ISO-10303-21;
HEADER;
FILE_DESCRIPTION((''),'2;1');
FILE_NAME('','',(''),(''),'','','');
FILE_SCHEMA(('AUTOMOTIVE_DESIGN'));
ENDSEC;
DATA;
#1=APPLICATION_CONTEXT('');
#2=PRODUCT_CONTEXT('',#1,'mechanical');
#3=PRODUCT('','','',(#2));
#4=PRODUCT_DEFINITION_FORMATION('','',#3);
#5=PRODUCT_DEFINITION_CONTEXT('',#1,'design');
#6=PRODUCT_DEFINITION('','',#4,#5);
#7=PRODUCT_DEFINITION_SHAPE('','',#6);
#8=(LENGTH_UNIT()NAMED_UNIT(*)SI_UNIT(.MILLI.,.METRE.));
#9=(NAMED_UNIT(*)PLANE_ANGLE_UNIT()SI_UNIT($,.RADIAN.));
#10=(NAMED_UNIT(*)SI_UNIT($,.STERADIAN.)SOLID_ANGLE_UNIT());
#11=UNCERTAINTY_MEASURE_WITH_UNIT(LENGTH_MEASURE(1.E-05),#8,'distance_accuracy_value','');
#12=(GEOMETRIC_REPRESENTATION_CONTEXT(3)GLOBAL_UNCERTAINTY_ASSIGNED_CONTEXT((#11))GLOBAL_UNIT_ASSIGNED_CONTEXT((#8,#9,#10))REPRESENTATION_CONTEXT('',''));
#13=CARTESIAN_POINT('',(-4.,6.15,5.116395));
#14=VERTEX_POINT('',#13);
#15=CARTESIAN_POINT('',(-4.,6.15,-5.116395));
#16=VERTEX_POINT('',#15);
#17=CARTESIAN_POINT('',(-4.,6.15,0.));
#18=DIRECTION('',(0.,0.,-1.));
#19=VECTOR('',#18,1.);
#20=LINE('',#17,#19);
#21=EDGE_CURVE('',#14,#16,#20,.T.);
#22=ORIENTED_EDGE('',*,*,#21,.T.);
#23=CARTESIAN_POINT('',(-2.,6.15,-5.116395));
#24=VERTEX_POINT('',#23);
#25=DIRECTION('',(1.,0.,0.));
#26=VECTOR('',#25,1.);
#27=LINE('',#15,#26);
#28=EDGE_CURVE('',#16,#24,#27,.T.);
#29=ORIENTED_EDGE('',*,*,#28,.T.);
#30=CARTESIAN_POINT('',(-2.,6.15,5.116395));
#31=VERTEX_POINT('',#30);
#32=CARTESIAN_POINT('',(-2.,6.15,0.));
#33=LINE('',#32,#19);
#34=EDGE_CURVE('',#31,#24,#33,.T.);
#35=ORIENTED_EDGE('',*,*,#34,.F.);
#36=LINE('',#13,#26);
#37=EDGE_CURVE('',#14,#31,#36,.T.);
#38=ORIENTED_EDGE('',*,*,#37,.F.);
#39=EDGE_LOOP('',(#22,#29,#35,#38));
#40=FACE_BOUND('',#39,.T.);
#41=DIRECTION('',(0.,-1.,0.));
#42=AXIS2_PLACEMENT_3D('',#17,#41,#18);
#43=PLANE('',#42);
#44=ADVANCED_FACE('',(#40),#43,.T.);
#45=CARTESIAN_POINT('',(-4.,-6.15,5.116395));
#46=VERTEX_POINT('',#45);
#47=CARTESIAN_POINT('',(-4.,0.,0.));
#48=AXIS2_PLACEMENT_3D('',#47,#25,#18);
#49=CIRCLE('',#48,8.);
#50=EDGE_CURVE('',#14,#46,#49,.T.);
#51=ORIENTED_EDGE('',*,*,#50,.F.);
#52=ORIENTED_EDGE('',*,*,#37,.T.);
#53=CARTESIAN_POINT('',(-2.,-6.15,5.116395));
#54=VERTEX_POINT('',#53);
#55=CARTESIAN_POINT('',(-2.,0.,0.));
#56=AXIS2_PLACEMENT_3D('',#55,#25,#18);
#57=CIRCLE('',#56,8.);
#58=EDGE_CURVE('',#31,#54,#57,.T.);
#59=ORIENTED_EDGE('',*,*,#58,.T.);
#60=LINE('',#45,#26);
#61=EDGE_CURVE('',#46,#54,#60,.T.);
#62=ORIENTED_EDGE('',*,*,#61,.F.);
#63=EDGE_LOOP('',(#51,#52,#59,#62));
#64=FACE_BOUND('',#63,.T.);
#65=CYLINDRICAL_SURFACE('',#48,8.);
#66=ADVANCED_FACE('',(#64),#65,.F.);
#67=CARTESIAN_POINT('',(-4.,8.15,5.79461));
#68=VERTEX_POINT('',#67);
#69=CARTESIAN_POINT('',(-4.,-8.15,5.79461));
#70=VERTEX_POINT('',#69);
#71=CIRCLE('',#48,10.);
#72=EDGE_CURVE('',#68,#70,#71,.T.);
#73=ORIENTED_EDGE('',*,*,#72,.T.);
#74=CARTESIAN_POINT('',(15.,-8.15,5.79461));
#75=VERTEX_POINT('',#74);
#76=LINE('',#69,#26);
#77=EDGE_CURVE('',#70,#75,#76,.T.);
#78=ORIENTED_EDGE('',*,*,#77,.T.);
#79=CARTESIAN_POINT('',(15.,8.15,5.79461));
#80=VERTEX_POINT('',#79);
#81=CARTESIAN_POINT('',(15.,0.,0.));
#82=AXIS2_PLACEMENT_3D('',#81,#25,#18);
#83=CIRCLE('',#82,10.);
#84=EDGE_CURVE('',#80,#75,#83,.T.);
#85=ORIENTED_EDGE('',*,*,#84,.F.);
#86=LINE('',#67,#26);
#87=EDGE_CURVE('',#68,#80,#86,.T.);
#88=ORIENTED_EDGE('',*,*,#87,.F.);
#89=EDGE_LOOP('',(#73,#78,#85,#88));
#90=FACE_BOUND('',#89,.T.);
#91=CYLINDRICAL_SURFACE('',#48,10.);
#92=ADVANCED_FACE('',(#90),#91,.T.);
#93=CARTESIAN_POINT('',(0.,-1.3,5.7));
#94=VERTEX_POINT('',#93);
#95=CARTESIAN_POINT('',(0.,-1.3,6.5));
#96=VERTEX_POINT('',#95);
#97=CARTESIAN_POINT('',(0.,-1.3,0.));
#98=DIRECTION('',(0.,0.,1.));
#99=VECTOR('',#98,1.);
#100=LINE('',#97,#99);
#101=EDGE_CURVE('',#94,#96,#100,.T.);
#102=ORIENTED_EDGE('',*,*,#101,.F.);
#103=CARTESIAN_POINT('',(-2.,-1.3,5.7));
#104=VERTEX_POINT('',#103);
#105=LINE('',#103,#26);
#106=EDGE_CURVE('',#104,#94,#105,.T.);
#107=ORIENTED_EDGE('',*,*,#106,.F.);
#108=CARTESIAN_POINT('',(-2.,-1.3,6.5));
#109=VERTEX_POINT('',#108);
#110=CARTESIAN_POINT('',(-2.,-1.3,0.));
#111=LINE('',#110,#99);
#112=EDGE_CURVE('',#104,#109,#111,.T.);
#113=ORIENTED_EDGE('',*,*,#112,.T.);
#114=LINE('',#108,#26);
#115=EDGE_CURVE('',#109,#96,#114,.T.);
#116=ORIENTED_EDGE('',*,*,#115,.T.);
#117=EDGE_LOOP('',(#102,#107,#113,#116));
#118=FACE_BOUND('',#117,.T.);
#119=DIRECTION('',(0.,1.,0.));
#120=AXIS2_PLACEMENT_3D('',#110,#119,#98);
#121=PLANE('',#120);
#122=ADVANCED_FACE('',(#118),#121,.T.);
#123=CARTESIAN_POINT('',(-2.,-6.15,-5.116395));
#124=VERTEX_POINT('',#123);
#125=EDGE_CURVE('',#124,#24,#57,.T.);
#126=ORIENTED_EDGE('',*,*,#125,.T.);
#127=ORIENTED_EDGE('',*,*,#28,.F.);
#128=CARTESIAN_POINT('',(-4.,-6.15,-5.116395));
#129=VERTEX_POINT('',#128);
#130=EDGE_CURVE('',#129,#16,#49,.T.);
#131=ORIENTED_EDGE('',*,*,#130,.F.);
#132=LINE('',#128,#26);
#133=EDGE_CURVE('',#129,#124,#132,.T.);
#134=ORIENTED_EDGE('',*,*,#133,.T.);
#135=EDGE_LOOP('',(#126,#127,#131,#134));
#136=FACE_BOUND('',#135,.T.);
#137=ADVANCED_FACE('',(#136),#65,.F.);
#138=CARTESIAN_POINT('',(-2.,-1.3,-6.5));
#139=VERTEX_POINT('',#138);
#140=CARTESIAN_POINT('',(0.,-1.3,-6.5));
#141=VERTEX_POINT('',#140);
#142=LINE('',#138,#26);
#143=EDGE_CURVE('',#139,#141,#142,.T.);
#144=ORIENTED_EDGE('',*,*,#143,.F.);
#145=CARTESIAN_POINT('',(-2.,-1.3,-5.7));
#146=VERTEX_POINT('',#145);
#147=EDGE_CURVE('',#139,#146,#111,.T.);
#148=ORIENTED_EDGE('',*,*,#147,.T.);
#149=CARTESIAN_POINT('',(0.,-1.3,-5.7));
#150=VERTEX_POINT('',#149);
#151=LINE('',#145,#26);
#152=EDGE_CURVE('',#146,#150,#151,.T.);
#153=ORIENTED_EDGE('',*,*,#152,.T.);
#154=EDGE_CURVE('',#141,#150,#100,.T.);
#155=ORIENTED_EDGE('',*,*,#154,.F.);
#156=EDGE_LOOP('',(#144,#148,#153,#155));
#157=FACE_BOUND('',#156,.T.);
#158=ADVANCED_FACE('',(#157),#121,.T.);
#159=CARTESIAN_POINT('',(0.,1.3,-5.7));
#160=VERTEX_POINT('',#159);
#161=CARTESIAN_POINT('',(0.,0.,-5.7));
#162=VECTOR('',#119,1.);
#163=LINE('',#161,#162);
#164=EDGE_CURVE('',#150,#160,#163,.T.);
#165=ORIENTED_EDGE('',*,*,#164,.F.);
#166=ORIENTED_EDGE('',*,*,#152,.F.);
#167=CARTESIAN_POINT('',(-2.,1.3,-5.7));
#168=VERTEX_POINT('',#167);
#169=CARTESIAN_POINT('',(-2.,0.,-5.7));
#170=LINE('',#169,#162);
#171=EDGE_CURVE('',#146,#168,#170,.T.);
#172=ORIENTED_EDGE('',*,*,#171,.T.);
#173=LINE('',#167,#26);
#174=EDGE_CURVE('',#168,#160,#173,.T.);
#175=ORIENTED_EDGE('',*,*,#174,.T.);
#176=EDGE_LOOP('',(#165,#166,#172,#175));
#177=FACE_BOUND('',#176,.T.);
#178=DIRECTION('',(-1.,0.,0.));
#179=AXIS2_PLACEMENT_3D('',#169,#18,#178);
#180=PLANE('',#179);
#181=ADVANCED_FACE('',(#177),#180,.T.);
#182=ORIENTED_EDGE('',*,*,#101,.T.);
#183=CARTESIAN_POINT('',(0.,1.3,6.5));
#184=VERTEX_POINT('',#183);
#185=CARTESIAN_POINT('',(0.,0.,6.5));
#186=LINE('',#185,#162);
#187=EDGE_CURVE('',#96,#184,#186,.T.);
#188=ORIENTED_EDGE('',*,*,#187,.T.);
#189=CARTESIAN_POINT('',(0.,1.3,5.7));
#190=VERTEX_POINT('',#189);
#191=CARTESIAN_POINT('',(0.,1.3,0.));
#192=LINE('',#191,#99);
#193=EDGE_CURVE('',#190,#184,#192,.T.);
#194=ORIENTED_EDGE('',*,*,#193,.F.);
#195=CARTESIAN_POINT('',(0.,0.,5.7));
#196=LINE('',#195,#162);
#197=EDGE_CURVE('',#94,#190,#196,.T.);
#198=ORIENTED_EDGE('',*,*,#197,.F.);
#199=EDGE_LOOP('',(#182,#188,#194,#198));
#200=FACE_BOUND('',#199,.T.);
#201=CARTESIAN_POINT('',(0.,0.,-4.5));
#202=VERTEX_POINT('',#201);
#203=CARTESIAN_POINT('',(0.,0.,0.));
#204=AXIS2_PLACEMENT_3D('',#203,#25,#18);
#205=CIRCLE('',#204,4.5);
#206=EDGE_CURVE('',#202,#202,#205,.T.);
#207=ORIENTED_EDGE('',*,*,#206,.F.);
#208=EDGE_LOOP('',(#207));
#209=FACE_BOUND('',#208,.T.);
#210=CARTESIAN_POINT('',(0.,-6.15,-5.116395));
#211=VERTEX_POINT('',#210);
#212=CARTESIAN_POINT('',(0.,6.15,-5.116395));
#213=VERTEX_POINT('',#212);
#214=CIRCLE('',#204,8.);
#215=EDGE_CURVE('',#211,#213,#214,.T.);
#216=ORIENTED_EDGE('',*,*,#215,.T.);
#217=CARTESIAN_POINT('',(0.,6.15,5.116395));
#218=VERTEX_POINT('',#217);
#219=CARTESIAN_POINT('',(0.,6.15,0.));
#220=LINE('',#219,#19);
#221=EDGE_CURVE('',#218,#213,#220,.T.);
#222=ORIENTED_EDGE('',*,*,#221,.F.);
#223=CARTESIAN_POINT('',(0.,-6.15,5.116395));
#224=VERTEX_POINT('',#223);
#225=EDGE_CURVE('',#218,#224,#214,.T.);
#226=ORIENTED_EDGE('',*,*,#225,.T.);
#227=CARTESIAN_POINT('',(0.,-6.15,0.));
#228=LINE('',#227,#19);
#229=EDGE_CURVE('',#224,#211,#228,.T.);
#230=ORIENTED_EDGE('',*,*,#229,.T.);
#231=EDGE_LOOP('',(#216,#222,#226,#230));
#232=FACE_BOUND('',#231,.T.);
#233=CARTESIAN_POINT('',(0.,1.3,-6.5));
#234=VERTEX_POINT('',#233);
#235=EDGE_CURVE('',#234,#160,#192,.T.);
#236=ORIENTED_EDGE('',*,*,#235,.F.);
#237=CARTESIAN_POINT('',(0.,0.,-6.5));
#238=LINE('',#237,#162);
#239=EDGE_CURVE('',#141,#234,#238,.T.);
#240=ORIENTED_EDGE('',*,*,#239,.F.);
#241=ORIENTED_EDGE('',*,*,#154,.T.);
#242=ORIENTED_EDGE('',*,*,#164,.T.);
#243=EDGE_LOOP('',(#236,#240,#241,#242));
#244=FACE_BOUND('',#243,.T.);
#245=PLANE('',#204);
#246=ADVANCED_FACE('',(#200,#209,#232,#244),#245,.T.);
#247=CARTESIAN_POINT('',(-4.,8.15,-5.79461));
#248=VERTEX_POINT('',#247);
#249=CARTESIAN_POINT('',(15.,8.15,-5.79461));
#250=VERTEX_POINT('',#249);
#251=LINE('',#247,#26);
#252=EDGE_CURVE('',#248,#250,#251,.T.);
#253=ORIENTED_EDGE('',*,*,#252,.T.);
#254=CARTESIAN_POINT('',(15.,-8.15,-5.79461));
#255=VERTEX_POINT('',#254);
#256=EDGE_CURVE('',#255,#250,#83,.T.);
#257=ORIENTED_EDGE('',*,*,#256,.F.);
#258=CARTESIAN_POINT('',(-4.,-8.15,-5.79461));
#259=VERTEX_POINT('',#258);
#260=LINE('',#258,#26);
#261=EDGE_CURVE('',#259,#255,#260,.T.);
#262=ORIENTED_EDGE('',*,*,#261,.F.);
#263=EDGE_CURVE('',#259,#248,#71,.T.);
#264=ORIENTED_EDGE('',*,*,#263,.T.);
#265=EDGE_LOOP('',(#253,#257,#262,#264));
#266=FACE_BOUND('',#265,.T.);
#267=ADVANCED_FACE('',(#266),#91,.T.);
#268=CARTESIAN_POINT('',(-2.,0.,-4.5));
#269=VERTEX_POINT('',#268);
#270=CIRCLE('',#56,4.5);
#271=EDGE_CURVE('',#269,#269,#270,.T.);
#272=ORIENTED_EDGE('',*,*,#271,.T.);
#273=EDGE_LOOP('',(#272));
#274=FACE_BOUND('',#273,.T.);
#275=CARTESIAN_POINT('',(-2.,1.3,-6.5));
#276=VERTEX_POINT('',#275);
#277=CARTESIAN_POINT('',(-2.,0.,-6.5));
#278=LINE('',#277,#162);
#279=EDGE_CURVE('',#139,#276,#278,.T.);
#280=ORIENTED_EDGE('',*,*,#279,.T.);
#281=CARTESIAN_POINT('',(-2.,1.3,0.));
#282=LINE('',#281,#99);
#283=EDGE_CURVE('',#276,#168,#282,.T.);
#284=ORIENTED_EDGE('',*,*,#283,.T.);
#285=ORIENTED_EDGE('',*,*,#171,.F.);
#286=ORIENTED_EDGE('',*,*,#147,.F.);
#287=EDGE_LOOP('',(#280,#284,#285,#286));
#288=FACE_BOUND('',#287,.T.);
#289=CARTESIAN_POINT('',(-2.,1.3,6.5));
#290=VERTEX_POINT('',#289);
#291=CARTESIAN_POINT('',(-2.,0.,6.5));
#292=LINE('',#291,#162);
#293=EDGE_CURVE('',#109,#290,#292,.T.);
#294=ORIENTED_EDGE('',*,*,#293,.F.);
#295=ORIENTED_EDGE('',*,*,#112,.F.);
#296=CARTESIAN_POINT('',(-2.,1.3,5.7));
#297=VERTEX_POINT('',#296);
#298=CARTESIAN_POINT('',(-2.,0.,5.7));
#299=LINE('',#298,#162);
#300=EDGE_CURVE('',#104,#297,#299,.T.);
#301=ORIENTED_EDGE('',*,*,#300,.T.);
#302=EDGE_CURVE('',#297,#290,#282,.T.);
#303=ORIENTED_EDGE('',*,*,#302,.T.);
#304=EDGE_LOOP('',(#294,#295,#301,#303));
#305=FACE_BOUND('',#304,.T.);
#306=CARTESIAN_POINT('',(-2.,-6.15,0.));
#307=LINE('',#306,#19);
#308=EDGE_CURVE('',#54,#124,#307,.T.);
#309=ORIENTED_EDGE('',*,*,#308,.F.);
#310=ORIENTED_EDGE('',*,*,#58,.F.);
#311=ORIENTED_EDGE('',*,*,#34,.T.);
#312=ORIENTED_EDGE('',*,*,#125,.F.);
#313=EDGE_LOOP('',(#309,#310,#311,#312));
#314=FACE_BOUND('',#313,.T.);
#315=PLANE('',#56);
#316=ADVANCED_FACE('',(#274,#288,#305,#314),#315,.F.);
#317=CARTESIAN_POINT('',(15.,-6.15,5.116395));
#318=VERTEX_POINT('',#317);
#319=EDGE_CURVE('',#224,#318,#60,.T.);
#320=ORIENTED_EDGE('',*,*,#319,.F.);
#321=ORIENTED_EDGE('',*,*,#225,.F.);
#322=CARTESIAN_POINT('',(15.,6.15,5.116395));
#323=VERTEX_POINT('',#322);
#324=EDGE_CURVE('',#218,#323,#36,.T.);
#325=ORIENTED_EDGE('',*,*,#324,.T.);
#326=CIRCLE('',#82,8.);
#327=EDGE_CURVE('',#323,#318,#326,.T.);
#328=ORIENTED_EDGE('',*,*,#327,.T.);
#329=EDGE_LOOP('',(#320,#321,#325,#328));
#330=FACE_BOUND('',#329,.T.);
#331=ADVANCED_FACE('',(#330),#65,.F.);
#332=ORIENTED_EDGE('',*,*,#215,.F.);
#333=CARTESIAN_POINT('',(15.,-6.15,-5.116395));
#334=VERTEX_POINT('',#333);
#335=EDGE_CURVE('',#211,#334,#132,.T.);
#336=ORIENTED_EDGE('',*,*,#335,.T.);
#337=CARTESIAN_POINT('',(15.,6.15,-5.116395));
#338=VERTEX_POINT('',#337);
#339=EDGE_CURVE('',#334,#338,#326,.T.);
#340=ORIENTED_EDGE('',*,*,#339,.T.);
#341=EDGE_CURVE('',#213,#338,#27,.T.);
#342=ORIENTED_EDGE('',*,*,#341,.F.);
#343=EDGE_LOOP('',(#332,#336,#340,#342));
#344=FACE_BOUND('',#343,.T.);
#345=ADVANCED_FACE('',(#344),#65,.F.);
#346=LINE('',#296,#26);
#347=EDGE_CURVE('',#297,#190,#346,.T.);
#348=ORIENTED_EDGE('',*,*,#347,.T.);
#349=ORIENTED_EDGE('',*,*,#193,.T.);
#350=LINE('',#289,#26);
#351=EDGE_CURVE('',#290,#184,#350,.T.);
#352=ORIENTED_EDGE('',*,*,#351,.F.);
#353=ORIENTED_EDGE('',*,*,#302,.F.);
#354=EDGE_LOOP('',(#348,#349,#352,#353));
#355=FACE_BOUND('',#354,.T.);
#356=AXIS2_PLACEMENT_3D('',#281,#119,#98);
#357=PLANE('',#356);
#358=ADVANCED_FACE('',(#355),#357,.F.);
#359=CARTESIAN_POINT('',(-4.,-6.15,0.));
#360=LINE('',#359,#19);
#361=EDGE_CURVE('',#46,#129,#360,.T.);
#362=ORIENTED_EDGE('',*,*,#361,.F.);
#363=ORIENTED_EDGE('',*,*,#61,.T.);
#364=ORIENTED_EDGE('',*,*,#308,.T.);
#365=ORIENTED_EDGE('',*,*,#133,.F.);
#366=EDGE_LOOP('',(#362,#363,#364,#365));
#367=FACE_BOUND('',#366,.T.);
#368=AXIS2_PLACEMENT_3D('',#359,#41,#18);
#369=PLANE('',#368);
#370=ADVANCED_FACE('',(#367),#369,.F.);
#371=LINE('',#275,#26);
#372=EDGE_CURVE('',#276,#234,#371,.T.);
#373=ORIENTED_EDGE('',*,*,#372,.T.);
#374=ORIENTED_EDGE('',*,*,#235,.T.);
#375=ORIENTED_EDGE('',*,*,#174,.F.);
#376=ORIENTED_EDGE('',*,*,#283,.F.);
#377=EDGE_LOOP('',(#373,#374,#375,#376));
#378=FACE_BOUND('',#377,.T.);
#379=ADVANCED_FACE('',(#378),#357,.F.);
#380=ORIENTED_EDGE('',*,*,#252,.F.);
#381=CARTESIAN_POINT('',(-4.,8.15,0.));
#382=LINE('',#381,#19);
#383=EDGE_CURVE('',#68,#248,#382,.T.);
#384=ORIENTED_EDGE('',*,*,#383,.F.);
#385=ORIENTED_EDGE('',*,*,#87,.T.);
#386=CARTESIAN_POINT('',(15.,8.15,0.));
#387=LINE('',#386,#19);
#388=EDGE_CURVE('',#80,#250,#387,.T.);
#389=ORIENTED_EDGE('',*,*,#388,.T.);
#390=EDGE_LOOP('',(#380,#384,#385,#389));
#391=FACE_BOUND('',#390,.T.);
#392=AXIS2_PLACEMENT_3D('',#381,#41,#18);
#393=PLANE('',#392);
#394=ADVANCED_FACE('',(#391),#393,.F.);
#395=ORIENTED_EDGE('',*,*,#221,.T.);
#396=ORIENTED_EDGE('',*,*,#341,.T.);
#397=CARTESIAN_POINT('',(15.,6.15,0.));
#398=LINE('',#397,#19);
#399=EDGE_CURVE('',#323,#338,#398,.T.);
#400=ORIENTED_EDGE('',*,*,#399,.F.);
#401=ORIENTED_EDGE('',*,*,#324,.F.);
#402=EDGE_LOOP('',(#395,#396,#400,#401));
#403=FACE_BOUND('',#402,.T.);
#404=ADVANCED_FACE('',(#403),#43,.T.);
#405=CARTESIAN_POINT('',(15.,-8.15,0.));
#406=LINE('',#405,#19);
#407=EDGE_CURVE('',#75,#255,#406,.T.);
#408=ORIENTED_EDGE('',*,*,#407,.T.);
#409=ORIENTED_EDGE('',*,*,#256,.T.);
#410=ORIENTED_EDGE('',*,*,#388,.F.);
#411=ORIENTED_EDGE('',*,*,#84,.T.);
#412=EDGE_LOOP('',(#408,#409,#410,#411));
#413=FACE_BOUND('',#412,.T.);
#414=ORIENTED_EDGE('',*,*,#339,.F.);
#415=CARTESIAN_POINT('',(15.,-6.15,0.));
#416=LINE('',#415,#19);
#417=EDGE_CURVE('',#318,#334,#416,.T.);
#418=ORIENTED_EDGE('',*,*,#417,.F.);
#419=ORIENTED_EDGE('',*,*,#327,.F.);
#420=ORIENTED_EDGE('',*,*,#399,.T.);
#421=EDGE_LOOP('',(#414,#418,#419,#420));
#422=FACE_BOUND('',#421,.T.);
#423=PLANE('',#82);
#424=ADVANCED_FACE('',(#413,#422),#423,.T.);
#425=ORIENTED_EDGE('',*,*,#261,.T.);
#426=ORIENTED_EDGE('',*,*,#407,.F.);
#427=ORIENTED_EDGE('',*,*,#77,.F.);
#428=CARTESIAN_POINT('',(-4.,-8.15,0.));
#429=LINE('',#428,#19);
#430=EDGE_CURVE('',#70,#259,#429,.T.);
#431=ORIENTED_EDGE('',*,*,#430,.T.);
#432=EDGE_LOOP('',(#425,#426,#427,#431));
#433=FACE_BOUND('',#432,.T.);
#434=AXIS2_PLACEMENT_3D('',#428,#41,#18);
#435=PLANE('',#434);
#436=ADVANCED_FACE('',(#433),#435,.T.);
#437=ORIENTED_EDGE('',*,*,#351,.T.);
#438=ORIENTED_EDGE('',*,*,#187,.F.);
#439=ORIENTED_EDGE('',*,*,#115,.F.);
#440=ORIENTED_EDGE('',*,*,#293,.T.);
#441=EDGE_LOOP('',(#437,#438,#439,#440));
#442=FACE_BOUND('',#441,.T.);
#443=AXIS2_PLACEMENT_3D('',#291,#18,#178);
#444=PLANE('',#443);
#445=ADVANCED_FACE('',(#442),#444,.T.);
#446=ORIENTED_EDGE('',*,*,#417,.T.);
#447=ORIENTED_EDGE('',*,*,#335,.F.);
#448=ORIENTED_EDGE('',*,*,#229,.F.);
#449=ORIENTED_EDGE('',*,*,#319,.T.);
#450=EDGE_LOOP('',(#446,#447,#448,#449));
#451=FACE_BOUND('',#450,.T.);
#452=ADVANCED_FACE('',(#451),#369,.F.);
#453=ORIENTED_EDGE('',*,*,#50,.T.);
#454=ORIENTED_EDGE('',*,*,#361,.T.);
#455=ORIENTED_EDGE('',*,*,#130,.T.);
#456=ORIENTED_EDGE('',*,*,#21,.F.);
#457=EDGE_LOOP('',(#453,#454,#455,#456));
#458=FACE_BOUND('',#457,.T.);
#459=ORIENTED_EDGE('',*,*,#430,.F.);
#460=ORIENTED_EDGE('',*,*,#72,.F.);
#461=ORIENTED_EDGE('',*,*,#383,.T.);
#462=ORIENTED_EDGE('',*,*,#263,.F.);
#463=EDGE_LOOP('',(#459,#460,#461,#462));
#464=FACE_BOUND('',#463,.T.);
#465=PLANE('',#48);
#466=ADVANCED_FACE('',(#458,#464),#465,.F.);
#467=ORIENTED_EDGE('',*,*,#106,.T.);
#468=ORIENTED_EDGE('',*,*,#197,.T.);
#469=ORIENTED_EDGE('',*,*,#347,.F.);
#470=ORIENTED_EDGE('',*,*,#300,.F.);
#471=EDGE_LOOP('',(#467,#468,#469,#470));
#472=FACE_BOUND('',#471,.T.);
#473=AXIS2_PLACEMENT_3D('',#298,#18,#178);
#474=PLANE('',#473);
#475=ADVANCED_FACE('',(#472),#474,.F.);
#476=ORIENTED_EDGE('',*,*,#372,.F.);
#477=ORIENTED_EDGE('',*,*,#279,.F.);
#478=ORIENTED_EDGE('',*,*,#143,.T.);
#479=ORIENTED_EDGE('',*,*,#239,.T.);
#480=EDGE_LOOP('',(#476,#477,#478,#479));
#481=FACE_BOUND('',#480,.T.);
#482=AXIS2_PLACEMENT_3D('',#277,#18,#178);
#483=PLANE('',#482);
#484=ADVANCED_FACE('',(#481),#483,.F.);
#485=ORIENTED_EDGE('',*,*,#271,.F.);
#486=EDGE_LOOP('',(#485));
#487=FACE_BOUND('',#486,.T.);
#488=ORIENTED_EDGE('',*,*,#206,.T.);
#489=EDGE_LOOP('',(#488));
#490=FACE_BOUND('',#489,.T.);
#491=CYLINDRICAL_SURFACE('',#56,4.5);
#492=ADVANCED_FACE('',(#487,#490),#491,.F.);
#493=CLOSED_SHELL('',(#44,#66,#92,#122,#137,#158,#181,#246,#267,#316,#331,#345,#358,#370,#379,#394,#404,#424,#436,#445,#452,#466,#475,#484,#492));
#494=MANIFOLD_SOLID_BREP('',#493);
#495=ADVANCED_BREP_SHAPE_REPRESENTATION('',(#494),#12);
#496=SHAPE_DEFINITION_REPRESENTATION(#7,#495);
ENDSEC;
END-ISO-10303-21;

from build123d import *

# Parameters (mm, degrees)
SKETCH_1_W        = 0.8
SKETCH_1_H        = 2.6
SKETCH_1_R        = 4.5
EXTRUDE_1_DEPTH   = 2
EXTRUDE_START     = -4
EXTRUDE_1_2_DEPTH = 19


# Read off the part's stored shape, not the designer's step: 拉伸-薄壁1
with BuildPart() as part:
    # 草图1 → Extrude 1 (new body)
    with BuildSketch(Plane(origin=(0, 0, 0), x_dir=(0, 0, -1), z_dir=(1, 0, 0))):
        with BuildLine():
            ThreePointArc((-5.116395215, 6.15), (-8, 0), (-5.116395215, -6.15))
            Line((-5.116395215, -6.15), (5.116395215, -6.15))
            ThreePointArc((5.116395215, -6.15), (7.243312837, -3.396236025), (8, 0))
            ThreePointArc((8, 0), (7.243312837, 3.396236025), (5.116395215, 6.15))
            Line((5.116395215, 6.15), (-5.116395215, 6.15))
        make_face()
        with Locations((-6.1, 0)):
            Rectangle(SKETCH_1_W, SKETCH_1_H, mode=Mode.SUBTRACT)
        Circle(SKETCH_1_R, mode=Mode.SUBTRACT)
        with Locations((6.1, 0)):
            Rectangle(SKETCH_1_W, SKETCH_1_H, mode=Mode.SUBTRACT)
    extrude(amount=-EXTRUDE_1_DEPTH)

    # Extrude 1 2 outline → Extrude 1 2 (add)
    with BuildSketch(Plane(origin=(0, 0, 0), x_dir=(0, 0, -1), z_dir=(1, 0, 0)).offset(EXTRUDE_START)):
        with BuildLine():
            Line((5.794609564, 8.15), (-5.794609564, 8.15))
            ThreePointArc((-5.794609564, 8.15), (-10, 0), (-5.794609564, -8.15))
            Line((-5.794609564, -8.15), (5.794609564, -8.15))
            ThreePointArc((5.794609564, -8.15), (10, 0), (5.794609564, 8.15))
        make_face()
        with BuildLine():
            ThreePointArc((-5.116395215, -6.15), (-8, 0), (-5.116395215, 6.15))
            Line((-5.116395215, 6.15), (5.116395215, 6.15))
            ThreePointArc((5.116395215, 6.15), (8, 0), (5.116395215, -6.15))
            Line((5.116395215, -6.15), (-5.116395215, -6.15))
        make_face(mode=Mode.SUBTRACT)
    extrude(amount=EXTRUDE_1_2_DEPTH)


solid = part.part
